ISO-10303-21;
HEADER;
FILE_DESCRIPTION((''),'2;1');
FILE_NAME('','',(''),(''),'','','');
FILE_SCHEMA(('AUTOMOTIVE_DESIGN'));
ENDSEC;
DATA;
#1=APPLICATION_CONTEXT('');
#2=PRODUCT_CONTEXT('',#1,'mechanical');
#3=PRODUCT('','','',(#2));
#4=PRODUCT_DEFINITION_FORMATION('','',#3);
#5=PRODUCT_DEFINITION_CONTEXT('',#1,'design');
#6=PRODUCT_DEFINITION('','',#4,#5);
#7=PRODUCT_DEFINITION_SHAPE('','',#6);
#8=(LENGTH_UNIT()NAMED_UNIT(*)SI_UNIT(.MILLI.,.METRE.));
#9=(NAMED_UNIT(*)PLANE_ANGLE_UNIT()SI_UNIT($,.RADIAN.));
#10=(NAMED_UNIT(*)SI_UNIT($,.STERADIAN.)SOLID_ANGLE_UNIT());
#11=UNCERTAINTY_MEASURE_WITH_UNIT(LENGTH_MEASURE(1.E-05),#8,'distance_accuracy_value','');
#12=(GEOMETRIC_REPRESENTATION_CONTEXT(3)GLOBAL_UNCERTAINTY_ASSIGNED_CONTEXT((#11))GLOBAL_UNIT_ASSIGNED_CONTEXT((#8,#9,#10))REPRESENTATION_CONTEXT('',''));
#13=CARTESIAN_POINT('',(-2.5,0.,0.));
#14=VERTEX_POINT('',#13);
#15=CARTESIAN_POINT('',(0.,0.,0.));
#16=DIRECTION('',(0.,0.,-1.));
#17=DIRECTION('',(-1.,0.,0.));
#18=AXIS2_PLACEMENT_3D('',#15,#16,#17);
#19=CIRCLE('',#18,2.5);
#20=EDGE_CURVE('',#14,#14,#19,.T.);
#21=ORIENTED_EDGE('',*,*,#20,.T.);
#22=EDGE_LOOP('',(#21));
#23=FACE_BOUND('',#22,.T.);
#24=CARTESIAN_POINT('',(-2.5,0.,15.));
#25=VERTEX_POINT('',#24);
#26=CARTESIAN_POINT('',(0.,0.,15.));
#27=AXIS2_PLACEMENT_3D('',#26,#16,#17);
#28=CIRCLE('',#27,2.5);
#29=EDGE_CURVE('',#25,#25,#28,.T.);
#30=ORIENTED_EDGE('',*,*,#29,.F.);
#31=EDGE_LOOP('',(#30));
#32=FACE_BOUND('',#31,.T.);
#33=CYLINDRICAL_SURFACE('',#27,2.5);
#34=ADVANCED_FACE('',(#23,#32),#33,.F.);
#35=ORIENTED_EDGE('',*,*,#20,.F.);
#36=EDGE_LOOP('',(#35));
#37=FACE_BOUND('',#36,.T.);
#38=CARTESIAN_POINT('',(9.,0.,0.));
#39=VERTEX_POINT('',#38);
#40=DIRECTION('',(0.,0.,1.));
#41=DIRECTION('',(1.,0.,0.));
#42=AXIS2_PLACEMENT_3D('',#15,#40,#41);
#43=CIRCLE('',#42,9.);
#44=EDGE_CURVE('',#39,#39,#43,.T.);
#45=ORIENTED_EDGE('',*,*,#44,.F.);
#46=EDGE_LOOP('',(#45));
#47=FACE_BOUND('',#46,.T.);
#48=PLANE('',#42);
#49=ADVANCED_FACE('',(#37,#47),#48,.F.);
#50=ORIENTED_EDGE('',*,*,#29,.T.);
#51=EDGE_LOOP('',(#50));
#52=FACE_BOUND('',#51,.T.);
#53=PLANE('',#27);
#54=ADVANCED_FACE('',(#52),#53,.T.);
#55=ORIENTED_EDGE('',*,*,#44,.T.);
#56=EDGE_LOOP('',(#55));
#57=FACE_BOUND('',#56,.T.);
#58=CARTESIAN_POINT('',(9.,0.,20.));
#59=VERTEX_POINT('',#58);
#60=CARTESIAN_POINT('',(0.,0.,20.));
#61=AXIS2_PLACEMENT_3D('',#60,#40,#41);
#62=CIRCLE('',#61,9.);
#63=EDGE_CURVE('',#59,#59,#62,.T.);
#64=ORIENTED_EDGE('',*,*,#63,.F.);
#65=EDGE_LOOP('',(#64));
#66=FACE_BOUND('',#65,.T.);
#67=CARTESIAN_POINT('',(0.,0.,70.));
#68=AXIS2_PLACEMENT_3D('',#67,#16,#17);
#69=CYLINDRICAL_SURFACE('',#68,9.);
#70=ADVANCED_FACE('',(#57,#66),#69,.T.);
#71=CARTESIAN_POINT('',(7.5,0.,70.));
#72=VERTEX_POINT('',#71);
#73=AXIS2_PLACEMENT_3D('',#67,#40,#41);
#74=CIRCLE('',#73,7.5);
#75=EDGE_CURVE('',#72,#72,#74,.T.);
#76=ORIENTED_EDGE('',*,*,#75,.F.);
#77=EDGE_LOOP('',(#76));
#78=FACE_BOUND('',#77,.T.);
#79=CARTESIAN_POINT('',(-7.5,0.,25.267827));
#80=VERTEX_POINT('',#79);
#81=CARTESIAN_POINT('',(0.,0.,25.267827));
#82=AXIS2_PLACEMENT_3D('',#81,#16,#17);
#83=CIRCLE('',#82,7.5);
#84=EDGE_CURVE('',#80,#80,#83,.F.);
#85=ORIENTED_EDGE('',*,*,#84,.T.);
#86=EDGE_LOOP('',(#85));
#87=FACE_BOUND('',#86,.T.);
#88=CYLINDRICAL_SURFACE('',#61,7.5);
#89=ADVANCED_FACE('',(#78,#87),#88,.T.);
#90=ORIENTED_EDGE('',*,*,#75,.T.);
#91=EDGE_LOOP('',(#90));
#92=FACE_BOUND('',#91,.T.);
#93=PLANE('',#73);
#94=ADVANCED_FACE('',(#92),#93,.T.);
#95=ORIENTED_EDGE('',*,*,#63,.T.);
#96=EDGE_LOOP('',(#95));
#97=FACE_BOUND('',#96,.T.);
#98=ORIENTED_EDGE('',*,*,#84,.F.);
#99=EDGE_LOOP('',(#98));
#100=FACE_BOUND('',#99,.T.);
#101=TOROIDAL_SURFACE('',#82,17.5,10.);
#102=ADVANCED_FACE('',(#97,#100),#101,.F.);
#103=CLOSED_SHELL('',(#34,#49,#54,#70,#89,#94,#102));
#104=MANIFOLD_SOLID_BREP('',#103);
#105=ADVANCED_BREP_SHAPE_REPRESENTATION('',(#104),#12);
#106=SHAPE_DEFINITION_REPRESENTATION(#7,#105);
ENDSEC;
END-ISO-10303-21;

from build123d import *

# Parameters (mm, degrees)
SKETCH1_R           = 9
BOSS_EXTRUDE1_DEPTH = 70
SKETCH2_R           = 2.5
CUT_EXTRUDE1_DEPTH  = 15
CUT_EXTRUDE2_START  = -50
SKETCH3_R           = 9
SKETCH3_R_2         = 7.5
CUT_EXTRUDE2_DEPTH  = 50
FILLET1_R           = 10


with BuildPart() as part:
    # Sketch1 → Boss-Extrude1 (new body)
    with BuildSketch(Plane.XY):
        Circle(SKETCH1_R)
    extrude(amount=BOSS_EXTRUDE1_DEPTH)

    # Sketch2 → Cut-Extrude1 (cut)
    with BuildSketch(Plane(origin=(0, 0, 0), x_dir=(-1, 0, 0), z_dir=(0, 0, -1))):
        Circle(SKETCH2_R)
    extrude(amount=-CUT_EXTRUDE1_DEPTH, mode=Mode.SUBTRACT)

    # Sketch3 → Cut-Extrude2 (cut)
    with BuildSketch(Plane.XY.offset(70).offset(CUT_EXTRUDE2_START)):
        Circle(SKETCH3_R)
        Circle(SKETCH3_R_2, mode=Mode.SUBTRACT)
    extrude(amount=CUT_EXTRUDE2_DEPTH, mode=Mode.SUBTRACT)

    # Fillet1
    # the kernel refuses this fillet: 10 mm, written as the material it adds along each edge
    with BuildSketch(Plane(origin=(0, 0, 20), x_dir=(1, 0, 0), z_dir=(0, -1, 0))) as fillet1_piece_1:
        with BuildLine():
            CenterArc((17.5, 5.267826876), FILLET1_R, 180, 31.788330617)
            Line((7.5, 5.267826876), (7.3, 5.267826876))
            Line((7.3, 5.267826876), (7.3, 0))
            Line((7.3, 0), (7.5, -0.2))
            ThreePointArc((7.5, -0.2), (8.25, -0.2), (8.83, -0.105356538))
            Line((8.83, -0.105356538), (9, 0))
        make_face()
    revolve(axis=Axis((0, 0, 20), (0, 0, 1)))


solid = part.part
